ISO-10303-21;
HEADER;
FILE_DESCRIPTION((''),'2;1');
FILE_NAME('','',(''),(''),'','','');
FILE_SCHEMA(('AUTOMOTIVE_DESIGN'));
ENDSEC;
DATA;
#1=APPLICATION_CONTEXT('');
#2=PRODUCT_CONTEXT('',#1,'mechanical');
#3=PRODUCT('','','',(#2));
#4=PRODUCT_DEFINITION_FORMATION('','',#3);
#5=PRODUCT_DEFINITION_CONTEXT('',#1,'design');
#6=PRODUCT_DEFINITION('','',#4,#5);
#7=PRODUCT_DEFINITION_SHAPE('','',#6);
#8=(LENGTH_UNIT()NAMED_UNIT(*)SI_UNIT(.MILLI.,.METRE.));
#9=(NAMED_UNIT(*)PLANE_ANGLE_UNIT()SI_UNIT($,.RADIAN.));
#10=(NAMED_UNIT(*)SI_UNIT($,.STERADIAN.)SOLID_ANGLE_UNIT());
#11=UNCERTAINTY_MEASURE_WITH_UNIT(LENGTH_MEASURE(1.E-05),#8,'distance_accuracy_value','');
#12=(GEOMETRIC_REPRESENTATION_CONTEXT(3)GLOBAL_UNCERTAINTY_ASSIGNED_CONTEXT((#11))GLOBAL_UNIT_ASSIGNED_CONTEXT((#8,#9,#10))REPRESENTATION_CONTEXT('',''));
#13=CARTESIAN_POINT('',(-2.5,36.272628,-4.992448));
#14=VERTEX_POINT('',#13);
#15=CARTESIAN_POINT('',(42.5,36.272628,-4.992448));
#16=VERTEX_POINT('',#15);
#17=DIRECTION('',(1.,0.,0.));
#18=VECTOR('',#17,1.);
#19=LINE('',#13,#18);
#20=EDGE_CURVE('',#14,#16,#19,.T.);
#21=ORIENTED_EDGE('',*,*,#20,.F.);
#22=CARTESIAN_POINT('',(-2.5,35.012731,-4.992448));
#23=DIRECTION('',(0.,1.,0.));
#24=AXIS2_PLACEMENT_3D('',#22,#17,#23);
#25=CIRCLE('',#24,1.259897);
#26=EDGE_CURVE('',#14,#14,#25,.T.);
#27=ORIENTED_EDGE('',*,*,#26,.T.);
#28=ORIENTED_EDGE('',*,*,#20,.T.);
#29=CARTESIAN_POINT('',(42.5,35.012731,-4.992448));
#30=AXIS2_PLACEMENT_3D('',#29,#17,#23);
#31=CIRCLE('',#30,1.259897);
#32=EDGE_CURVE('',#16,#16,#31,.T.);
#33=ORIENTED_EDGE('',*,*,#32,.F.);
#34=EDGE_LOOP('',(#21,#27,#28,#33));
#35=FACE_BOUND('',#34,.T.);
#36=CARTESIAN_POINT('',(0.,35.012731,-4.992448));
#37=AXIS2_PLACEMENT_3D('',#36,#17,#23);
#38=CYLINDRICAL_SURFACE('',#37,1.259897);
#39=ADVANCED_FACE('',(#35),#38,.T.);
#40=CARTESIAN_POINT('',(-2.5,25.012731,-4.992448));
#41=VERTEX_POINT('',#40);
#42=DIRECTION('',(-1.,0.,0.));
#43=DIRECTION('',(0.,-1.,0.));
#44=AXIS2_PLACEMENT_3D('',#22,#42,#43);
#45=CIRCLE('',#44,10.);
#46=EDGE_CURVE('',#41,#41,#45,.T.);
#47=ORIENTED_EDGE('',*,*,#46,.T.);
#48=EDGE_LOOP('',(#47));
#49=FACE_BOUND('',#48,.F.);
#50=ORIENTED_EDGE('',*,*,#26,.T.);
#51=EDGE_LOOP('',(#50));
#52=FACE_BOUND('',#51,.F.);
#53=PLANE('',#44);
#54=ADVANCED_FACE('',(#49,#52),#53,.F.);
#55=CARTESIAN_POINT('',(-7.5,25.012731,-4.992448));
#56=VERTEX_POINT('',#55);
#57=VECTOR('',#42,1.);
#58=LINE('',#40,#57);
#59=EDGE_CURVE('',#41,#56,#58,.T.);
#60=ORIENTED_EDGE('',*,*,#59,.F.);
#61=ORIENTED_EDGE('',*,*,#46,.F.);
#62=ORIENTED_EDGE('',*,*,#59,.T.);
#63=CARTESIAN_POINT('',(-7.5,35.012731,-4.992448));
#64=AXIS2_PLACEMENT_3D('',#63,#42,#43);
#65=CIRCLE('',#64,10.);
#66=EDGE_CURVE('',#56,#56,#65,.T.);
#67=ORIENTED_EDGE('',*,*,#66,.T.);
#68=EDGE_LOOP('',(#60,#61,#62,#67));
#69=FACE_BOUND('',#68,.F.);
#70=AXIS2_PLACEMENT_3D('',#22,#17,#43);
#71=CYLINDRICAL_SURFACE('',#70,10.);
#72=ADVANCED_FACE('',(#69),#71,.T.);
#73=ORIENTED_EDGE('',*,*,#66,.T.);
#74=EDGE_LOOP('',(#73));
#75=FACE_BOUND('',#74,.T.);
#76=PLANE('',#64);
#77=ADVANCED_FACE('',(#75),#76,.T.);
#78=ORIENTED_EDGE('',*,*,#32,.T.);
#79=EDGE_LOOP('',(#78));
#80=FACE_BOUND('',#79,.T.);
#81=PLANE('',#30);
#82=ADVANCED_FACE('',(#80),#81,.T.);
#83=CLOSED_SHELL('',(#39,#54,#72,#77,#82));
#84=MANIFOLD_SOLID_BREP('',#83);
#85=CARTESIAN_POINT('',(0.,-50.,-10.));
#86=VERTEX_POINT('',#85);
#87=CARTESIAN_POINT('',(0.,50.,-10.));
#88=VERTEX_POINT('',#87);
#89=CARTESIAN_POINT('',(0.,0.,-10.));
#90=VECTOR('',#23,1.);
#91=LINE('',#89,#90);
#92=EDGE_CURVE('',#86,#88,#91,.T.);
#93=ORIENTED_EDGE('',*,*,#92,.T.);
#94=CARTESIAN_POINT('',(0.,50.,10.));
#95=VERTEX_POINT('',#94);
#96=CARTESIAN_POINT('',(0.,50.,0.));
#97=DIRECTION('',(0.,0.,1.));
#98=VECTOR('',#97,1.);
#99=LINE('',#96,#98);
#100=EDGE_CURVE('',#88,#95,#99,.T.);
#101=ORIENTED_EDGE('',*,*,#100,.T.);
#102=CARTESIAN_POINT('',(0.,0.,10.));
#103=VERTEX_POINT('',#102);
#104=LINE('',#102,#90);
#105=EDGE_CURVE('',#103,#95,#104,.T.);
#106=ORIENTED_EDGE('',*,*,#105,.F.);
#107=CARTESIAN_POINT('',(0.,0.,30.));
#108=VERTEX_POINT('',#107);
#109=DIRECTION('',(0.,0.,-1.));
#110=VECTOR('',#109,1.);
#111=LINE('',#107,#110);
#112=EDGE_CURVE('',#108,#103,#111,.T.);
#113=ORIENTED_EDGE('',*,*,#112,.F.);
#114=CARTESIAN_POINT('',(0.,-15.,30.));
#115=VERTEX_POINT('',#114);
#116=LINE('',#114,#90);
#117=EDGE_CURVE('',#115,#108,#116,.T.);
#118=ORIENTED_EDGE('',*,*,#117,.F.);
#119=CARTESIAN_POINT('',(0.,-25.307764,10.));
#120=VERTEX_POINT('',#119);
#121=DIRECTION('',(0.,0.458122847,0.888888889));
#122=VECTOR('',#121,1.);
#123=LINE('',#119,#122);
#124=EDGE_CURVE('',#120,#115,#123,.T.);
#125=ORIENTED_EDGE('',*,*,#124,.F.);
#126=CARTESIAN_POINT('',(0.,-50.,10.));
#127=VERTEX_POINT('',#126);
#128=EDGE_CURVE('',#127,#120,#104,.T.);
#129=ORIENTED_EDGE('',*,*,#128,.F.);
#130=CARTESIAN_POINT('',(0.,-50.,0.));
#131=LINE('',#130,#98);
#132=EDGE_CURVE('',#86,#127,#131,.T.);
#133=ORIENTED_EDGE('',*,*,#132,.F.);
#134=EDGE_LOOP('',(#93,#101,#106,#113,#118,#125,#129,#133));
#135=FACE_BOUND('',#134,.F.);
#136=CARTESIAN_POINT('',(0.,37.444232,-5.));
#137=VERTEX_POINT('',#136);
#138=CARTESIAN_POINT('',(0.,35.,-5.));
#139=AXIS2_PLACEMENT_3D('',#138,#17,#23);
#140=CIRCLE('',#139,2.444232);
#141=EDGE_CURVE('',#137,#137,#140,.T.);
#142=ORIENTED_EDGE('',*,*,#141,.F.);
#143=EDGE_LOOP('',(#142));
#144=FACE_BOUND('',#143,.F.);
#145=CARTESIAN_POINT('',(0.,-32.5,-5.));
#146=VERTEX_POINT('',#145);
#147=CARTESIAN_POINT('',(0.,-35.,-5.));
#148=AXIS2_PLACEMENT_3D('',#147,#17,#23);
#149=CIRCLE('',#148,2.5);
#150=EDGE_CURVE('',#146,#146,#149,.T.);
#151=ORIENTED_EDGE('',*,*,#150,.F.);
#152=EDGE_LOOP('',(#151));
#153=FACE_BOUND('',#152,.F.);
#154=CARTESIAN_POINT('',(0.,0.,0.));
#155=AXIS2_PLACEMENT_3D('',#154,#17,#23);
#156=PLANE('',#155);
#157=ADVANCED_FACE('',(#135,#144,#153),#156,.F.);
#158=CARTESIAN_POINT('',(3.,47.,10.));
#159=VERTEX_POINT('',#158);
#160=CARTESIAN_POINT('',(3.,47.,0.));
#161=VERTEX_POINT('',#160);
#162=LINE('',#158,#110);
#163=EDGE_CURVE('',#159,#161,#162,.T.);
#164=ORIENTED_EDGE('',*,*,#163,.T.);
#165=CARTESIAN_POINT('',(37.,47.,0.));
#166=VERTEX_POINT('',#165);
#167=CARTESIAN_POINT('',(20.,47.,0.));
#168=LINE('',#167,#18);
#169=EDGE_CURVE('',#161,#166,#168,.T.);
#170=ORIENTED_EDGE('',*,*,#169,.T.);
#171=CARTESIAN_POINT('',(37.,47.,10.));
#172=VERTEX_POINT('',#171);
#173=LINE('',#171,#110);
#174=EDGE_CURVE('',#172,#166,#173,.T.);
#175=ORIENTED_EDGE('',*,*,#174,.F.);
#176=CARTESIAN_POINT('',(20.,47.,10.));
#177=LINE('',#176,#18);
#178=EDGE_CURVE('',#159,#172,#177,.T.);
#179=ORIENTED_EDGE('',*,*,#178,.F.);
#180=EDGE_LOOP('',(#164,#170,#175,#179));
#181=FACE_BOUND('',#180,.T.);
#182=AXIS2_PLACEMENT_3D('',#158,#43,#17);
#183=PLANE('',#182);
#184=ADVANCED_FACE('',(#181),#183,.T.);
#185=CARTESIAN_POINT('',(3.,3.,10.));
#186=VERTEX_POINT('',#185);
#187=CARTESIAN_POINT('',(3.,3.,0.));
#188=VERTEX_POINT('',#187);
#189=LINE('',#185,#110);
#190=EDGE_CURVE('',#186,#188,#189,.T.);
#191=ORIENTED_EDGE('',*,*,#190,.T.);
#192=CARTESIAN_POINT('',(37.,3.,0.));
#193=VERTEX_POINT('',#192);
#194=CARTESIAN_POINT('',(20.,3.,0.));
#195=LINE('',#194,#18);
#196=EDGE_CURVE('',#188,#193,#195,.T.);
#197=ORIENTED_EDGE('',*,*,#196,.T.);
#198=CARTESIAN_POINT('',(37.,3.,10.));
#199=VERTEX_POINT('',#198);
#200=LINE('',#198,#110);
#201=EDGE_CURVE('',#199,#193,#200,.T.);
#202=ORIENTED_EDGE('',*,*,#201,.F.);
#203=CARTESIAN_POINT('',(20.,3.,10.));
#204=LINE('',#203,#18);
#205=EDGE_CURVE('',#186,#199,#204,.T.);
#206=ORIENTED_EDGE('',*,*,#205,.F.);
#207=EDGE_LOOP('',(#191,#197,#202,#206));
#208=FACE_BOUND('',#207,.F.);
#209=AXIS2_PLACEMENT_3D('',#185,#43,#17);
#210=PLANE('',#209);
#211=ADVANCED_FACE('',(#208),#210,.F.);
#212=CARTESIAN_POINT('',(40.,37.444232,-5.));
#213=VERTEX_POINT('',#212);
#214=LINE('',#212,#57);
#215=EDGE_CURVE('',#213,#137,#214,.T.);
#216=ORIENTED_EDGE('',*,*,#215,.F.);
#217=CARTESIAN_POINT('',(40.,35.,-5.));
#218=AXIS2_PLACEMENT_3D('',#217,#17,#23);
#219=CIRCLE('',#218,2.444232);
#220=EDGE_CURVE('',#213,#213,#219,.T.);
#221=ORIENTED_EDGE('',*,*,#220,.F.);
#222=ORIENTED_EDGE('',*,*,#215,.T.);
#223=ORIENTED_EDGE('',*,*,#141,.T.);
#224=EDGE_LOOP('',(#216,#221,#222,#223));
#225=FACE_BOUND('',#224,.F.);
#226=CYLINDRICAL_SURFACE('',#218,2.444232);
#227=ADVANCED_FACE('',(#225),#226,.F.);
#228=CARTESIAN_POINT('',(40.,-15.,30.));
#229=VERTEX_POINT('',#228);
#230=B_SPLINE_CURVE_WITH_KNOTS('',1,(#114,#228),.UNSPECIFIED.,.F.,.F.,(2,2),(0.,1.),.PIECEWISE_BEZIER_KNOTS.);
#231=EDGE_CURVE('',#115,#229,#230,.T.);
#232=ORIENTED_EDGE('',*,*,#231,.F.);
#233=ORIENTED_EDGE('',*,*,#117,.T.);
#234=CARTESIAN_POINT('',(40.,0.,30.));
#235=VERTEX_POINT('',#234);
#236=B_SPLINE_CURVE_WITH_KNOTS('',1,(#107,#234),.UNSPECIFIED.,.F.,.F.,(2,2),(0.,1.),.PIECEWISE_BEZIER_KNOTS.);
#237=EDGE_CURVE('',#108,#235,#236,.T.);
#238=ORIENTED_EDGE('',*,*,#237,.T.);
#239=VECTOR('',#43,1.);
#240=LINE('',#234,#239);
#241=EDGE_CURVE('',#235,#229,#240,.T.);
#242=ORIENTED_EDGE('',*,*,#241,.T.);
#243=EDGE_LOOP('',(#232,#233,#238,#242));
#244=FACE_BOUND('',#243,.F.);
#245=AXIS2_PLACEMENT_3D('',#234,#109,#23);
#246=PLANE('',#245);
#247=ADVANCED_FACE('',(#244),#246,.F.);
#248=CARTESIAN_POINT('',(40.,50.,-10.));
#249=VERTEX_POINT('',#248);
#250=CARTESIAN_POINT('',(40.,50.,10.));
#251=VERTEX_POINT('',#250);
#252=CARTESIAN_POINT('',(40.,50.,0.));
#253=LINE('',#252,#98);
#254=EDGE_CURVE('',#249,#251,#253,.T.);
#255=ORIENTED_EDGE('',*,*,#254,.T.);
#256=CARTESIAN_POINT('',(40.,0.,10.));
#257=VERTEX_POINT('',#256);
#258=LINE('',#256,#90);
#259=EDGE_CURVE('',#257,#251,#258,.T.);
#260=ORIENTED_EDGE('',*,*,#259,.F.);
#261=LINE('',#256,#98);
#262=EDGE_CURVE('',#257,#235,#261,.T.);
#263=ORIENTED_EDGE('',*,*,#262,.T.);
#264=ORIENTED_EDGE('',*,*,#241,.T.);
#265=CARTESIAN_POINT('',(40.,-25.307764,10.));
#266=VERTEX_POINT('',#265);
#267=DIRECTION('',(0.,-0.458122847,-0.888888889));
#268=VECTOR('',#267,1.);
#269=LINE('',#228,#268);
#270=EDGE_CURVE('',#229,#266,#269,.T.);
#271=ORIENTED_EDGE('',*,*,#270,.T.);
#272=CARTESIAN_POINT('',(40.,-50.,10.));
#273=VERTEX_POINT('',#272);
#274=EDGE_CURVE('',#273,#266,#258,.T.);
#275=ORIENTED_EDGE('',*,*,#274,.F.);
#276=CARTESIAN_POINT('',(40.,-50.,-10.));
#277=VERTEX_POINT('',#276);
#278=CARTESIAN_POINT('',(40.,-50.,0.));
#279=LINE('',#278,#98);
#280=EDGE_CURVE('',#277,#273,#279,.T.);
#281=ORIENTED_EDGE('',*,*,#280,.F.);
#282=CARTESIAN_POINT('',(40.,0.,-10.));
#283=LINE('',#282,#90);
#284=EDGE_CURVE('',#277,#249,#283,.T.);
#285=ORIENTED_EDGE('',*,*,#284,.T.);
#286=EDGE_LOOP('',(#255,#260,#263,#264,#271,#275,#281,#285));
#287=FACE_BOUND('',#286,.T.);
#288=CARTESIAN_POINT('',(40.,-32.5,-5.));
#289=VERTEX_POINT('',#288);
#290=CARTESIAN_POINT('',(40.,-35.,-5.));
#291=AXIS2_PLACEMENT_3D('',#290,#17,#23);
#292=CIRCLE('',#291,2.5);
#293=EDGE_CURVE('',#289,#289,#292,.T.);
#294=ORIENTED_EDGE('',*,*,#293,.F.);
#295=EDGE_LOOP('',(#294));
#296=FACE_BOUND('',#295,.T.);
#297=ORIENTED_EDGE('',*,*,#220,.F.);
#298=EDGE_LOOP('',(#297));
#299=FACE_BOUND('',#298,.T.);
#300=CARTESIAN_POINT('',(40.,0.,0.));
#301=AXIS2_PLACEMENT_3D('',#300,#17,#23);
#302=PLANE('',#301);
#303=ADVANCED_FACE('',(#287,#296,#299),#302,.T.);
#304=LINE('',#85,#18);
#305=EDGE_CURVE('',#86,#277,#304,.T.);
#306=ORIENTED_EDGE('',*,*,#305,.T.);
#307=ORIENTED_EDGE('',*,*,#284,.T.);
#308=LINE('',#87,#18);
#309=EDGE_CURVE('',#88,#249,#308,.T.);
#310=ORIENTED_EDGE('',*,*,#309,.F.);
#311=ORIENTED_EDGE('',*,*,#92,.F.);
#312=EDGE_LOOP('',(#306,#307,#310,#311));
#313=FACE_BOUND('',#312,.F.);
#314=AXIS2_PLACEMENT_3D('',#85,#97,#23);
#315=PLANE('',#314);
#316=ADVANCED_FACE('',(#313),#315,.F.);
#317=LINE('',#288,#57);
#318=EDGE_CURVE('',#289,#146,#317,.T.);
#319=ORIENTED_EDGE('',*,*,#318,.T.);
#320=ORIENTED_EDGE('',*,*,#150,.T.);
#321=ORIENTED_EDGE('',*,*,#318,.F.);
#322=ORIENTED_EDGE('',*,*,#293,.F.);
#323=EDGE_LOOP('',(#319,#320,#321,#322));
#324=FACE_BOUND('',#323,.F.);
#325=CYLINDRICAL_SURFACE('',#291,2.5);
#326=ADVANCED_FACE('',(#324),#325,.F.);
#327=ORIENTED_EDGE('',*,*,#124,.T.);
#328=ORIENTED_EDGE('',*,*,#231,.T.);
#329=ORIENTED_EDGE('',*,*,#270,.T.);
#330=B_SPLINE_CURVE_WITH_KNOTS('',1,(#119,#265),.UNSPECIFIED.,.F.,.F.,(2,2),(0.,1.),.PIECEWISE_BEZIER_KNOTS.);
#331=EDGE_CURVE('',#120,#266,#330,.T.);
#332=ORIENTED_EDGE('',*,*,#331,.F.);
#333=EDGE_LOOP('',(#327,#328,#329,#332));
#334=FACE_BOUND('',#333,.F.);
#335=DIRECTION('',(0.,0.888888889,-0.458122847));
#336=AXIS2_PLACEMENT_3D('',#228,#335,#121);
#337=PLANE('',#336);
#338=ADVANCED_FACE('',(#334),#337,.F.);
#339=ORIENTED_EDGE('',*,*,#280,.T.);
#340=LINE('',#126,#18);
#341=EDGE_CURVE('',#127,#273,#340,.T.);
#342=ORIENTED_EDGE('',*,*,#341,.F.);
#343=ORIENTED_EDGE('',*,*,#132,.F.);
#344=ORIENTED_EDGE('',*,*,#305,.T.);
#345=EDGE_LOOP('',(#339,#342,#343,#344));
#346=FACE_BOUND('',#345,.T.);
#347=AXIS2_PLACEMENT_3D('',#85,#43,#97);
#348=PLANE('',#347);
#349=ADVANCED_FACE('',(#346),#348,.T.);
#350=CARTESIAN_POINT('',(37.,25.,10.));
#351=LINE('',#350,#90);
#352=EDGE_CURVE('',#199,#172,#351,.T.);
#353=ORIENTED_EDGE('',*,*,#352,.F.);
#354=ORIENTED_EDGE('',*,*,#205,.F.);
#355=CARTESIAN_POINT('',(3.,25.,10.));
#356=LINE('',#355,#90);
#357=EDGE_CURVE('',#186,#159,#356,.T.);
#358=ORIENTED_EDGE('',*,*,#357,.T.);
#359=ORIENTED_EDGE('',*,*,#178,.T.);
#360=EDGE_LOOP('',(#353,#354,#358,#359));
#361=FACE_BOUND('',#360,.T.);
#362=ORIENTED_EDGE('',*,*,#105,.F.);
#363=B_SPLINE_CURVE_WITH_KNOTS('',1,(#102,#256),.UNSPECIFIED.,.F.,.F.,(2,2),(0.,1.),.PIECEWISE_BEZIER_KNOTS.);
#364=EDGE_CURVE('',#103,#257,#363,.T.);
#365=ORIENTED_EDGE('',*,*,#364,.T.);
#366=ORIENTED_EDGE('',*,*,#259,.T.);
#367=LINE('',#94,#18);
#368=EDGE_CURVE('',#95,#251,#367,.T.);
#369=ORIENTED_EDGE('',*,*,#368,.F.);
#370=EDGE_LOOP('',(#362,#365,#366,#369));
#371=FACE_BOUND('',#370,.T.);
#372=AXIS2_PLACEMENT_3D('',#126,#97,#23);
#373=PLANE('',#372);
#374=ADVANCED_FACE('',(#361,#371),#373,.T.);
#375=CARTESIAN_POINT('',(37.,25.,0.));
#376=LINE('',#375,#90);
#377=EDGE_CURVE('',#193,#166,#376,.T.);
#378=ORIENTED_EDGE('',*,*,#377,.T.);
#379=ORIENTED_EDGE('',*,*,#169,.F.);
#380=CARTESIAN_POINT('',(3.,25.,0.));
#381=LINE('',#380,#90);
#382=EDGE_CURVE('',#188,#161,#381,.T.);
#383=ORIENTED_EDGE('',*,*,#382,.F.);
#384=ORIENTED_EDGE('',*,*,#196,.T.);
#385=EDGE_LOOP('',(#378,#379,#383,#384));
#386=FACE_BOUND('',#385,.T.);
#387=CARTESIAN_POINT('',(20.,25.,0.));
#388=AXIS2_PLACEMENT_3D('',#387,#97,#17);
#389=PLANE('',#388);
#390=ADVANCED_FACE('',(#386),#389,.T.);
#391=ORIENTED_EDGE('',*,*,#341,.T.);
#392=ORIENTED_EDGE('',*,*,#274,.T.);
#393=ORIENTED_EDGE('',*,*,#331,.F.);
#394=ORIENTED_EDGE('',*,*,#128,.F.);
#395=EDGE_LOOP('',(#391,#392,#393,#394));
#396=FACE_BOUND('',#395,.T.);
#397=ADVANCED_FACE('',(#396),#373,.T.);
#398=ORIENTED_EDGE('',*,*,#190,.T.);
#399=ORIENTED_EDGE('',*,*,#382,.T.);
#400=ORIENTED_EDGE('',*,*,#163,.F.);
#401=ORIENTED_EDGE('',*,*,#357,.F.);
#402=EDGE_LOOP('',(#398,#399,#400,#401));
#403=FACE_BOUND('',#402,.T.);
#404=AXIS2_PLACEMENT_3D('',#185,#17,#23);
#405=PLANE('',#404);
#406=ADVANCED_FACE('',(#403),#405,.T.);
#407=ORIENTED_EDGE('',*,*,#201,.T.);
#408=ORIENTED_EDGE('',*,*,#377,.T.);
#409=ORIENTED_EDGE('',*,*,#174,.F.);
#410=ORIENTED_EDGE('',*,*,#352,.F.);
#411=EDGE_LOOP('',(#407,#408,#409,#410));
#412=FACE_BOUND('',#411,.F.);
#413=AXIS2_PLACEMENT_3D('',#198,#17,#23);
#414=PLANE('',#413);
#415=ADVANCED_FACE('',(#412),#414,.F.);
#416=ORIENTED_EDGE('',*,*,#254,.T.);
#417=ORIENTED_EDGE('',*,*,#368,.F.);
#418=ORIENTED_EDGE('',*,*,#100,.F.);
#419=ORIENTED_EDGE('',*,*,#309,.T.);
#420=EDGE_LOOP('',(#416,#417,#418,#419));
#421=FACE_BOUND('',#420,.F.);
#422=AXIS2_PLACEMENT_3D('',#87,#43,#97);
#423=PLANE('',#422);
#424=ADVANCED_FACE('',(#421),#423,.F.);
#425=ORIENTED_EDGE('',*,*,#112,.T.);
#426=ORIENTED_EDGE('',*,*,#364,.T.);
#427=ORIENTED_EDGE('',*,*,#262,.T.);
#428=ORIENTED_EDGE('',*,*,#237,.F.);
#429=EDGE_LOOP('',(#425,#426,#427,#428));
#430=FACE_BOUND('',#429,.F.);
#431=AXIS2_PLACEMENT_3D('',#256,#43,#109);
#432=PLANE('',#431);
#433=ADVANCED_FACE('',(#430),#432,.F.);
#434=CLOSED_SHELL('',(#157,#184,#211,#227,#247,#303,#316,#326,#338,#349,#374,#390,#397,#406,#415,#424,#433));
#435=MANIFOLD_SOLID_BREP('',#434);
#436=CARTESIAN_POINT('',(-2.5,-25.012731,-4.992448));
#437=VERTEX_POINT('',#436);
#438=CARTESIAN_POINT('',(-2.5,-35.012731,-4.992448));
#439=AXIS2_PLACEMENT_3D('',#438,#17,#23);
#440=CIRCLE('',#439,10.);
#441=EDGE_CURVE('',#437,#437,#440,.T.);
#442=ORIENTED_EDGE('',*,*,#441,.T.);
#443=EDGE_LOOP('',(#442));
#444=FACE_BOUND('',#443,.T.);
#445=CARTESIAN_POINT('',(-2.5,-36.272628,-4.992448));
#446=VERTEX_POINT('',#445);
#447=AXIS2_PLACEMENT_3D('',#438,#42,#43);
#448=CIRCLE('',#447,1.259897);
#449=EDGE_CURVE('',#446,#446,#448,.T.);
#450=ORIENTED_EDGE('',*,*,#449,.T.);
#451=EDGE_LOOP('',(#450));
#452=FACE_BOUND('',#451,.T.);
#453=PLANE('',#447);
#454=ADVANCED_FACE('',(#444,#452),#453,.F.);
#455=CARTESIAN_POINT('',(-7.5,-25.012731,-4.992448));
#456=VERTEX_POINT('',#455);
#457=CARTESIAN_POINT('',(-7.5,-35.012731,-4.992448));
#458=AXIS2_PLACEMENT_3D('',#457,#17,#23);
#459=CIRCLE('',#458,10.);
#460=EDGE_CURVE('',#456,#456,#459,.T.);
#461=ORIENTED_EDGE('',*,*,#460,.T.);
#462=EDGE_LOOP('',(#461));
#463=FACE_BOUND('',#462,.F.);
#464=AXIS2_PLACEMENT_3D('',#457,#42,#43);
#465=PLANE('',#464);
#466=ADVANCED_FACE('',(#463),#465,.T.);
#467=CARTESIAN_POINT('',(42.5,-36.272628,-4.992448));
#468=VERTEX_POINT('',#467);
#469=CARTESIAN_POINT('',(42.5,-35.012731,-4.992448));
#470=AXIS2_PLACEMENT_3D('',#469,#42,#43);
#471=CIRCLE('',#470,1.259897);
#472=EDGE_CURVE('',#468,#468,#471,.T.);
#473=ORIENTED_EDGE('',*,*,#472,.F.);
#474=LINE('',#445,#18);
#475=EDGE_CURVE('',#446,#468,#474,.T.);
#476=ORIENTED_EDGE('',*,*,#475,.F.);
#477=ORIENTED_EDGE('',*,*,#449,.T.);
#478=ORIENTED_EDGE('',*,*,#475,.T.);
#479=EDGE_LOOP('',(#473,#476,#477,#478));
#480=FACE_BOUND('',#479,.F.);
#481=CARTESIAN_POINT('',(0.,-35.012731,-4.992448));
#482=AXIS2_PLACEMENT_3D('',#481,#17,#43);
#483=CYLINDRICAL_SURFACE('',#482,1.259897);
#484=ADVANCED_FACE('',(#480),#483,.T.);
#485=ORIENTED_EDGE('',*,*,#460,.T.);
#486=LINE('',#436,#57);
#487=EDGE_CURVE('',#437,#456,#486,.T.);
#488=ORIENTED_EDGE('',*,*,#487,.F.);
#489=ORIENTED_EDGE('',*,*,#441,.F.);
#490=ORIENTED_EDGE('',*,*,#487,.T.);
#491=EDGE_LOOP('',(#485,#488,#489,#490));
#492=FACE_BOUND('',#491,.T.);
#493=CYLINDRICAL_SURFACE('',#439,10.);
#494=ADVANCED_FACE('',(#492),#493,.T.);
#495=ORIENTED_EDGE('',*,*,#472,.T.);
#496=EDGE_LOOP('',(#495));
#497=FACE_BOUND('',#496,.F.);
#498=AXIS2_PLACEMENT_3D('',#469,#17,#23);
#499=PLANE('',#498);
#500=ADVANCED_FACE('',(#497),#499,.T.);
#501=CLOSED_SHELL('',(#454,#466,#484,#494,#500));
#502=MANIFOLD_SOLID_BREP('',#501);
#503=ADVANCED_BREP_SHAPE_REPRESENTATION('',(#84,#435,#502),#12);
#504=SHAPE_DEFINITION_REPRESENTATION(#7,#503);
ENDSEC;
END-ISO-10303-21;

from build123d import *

# Parameters (mm, degrees)
F0_W      = 100
F0_H      = 20
F1_DEPTH  = 40
F5_R      = 2.5
F5_R_2    = 2.444231729
F6_DEPTH  = 40.0010001
F7_W      = 34
F7_H      = 44
F8_DEPTH  = 10
F9_R      = 1.2598965516
F10_DEPTH = 42.5
F11_DEPTH = 2.5
F12_R     = 10
F13_DEPTH = 5


# Not quite as in the source:
# - a feature of the source that left no trace in its solid (it failed there, or was rolled back) is left out
# - the program builds the solid bodies; features that only make, move or delete a surface that nothing else refers to are left out


with BuildPart() as f1:
    # F0 (on Right) → F1 (new body)
    with BuildSketch(Plane.YZ):
        Rectangle(F0_W, F0_H)
    extrude(amount=F1_DEPTH)

    # F3 (on face) → F4 section 0
    with BuildSketch(Plane(origin=(0, 0, 0), x_dir=(0, -1, 0), z_dir=(-1, 0, 0))):
        Polygon((0, 30), (0, 10), (25.307764064, 10), (15, 30), align=None)
    # F2 (on face) → F4 section 1
    with BuildSketch(Plane.YZ.offset(40)):
        Polygon((-25.307764064, 10), (0, 10), (0, 30), (-15, 30), align=None)
    loft()

    # F5 (on face) → F6 (cut, through all)
    with BuildSketch(Plane.YZ.offset(40)):
        with Locations((-35, -5)):
            Circle(F5_R)
        with Locations((35, -5)):
            Circle(F5_R_2)
    extrude(amount=-F6_DEPTH, mode=Mode.SUBTRACT)

    # F7 (on face) → F8 (cut)
    with BuildSketch(Plane.XY.offset(10)):
        with Locations((20, 25)):
            Rectangle(F7_W, F7_H)
    extrude(amount=-F8_DEPTH, mode=Mode.SUBTRACT)


with BuildPart() as f10:
    # F9 (on Right) → F10 (new body)
    with BuildSketch(Plane.YZ):
        with Locations((35.0127312975, -4.9924484168)):
            Circle(F9_R)
    extrude(amount=F10_DEPTH)

    # F9 (on Right) → F11 (join)
    with BuildSketch(Plane.YZ):
        with Locations((35.0127312975, -4.9924484168)):
            Circle(F9_R)
    extrude(amount=-F11_DEPTH)

    # F12 (on face) → F13 (join)
    with BuildSketch(Plane(origin=(-2.5, 0, 0), x_dir=(0, -1, 0), z_dir=(-1, 0, 0))):
        with Locations((-35.0127312975, -4.9924484168)):
            Circle(F12_R)
    extrude(amount=F13_DEPTH)


with BuildPart() as f14_1:
    # F14: instance of F10
    add(f10.part.mirror(Plane.XZ))


solid = Compound([f1.part, f10.part, f14_1.part])
